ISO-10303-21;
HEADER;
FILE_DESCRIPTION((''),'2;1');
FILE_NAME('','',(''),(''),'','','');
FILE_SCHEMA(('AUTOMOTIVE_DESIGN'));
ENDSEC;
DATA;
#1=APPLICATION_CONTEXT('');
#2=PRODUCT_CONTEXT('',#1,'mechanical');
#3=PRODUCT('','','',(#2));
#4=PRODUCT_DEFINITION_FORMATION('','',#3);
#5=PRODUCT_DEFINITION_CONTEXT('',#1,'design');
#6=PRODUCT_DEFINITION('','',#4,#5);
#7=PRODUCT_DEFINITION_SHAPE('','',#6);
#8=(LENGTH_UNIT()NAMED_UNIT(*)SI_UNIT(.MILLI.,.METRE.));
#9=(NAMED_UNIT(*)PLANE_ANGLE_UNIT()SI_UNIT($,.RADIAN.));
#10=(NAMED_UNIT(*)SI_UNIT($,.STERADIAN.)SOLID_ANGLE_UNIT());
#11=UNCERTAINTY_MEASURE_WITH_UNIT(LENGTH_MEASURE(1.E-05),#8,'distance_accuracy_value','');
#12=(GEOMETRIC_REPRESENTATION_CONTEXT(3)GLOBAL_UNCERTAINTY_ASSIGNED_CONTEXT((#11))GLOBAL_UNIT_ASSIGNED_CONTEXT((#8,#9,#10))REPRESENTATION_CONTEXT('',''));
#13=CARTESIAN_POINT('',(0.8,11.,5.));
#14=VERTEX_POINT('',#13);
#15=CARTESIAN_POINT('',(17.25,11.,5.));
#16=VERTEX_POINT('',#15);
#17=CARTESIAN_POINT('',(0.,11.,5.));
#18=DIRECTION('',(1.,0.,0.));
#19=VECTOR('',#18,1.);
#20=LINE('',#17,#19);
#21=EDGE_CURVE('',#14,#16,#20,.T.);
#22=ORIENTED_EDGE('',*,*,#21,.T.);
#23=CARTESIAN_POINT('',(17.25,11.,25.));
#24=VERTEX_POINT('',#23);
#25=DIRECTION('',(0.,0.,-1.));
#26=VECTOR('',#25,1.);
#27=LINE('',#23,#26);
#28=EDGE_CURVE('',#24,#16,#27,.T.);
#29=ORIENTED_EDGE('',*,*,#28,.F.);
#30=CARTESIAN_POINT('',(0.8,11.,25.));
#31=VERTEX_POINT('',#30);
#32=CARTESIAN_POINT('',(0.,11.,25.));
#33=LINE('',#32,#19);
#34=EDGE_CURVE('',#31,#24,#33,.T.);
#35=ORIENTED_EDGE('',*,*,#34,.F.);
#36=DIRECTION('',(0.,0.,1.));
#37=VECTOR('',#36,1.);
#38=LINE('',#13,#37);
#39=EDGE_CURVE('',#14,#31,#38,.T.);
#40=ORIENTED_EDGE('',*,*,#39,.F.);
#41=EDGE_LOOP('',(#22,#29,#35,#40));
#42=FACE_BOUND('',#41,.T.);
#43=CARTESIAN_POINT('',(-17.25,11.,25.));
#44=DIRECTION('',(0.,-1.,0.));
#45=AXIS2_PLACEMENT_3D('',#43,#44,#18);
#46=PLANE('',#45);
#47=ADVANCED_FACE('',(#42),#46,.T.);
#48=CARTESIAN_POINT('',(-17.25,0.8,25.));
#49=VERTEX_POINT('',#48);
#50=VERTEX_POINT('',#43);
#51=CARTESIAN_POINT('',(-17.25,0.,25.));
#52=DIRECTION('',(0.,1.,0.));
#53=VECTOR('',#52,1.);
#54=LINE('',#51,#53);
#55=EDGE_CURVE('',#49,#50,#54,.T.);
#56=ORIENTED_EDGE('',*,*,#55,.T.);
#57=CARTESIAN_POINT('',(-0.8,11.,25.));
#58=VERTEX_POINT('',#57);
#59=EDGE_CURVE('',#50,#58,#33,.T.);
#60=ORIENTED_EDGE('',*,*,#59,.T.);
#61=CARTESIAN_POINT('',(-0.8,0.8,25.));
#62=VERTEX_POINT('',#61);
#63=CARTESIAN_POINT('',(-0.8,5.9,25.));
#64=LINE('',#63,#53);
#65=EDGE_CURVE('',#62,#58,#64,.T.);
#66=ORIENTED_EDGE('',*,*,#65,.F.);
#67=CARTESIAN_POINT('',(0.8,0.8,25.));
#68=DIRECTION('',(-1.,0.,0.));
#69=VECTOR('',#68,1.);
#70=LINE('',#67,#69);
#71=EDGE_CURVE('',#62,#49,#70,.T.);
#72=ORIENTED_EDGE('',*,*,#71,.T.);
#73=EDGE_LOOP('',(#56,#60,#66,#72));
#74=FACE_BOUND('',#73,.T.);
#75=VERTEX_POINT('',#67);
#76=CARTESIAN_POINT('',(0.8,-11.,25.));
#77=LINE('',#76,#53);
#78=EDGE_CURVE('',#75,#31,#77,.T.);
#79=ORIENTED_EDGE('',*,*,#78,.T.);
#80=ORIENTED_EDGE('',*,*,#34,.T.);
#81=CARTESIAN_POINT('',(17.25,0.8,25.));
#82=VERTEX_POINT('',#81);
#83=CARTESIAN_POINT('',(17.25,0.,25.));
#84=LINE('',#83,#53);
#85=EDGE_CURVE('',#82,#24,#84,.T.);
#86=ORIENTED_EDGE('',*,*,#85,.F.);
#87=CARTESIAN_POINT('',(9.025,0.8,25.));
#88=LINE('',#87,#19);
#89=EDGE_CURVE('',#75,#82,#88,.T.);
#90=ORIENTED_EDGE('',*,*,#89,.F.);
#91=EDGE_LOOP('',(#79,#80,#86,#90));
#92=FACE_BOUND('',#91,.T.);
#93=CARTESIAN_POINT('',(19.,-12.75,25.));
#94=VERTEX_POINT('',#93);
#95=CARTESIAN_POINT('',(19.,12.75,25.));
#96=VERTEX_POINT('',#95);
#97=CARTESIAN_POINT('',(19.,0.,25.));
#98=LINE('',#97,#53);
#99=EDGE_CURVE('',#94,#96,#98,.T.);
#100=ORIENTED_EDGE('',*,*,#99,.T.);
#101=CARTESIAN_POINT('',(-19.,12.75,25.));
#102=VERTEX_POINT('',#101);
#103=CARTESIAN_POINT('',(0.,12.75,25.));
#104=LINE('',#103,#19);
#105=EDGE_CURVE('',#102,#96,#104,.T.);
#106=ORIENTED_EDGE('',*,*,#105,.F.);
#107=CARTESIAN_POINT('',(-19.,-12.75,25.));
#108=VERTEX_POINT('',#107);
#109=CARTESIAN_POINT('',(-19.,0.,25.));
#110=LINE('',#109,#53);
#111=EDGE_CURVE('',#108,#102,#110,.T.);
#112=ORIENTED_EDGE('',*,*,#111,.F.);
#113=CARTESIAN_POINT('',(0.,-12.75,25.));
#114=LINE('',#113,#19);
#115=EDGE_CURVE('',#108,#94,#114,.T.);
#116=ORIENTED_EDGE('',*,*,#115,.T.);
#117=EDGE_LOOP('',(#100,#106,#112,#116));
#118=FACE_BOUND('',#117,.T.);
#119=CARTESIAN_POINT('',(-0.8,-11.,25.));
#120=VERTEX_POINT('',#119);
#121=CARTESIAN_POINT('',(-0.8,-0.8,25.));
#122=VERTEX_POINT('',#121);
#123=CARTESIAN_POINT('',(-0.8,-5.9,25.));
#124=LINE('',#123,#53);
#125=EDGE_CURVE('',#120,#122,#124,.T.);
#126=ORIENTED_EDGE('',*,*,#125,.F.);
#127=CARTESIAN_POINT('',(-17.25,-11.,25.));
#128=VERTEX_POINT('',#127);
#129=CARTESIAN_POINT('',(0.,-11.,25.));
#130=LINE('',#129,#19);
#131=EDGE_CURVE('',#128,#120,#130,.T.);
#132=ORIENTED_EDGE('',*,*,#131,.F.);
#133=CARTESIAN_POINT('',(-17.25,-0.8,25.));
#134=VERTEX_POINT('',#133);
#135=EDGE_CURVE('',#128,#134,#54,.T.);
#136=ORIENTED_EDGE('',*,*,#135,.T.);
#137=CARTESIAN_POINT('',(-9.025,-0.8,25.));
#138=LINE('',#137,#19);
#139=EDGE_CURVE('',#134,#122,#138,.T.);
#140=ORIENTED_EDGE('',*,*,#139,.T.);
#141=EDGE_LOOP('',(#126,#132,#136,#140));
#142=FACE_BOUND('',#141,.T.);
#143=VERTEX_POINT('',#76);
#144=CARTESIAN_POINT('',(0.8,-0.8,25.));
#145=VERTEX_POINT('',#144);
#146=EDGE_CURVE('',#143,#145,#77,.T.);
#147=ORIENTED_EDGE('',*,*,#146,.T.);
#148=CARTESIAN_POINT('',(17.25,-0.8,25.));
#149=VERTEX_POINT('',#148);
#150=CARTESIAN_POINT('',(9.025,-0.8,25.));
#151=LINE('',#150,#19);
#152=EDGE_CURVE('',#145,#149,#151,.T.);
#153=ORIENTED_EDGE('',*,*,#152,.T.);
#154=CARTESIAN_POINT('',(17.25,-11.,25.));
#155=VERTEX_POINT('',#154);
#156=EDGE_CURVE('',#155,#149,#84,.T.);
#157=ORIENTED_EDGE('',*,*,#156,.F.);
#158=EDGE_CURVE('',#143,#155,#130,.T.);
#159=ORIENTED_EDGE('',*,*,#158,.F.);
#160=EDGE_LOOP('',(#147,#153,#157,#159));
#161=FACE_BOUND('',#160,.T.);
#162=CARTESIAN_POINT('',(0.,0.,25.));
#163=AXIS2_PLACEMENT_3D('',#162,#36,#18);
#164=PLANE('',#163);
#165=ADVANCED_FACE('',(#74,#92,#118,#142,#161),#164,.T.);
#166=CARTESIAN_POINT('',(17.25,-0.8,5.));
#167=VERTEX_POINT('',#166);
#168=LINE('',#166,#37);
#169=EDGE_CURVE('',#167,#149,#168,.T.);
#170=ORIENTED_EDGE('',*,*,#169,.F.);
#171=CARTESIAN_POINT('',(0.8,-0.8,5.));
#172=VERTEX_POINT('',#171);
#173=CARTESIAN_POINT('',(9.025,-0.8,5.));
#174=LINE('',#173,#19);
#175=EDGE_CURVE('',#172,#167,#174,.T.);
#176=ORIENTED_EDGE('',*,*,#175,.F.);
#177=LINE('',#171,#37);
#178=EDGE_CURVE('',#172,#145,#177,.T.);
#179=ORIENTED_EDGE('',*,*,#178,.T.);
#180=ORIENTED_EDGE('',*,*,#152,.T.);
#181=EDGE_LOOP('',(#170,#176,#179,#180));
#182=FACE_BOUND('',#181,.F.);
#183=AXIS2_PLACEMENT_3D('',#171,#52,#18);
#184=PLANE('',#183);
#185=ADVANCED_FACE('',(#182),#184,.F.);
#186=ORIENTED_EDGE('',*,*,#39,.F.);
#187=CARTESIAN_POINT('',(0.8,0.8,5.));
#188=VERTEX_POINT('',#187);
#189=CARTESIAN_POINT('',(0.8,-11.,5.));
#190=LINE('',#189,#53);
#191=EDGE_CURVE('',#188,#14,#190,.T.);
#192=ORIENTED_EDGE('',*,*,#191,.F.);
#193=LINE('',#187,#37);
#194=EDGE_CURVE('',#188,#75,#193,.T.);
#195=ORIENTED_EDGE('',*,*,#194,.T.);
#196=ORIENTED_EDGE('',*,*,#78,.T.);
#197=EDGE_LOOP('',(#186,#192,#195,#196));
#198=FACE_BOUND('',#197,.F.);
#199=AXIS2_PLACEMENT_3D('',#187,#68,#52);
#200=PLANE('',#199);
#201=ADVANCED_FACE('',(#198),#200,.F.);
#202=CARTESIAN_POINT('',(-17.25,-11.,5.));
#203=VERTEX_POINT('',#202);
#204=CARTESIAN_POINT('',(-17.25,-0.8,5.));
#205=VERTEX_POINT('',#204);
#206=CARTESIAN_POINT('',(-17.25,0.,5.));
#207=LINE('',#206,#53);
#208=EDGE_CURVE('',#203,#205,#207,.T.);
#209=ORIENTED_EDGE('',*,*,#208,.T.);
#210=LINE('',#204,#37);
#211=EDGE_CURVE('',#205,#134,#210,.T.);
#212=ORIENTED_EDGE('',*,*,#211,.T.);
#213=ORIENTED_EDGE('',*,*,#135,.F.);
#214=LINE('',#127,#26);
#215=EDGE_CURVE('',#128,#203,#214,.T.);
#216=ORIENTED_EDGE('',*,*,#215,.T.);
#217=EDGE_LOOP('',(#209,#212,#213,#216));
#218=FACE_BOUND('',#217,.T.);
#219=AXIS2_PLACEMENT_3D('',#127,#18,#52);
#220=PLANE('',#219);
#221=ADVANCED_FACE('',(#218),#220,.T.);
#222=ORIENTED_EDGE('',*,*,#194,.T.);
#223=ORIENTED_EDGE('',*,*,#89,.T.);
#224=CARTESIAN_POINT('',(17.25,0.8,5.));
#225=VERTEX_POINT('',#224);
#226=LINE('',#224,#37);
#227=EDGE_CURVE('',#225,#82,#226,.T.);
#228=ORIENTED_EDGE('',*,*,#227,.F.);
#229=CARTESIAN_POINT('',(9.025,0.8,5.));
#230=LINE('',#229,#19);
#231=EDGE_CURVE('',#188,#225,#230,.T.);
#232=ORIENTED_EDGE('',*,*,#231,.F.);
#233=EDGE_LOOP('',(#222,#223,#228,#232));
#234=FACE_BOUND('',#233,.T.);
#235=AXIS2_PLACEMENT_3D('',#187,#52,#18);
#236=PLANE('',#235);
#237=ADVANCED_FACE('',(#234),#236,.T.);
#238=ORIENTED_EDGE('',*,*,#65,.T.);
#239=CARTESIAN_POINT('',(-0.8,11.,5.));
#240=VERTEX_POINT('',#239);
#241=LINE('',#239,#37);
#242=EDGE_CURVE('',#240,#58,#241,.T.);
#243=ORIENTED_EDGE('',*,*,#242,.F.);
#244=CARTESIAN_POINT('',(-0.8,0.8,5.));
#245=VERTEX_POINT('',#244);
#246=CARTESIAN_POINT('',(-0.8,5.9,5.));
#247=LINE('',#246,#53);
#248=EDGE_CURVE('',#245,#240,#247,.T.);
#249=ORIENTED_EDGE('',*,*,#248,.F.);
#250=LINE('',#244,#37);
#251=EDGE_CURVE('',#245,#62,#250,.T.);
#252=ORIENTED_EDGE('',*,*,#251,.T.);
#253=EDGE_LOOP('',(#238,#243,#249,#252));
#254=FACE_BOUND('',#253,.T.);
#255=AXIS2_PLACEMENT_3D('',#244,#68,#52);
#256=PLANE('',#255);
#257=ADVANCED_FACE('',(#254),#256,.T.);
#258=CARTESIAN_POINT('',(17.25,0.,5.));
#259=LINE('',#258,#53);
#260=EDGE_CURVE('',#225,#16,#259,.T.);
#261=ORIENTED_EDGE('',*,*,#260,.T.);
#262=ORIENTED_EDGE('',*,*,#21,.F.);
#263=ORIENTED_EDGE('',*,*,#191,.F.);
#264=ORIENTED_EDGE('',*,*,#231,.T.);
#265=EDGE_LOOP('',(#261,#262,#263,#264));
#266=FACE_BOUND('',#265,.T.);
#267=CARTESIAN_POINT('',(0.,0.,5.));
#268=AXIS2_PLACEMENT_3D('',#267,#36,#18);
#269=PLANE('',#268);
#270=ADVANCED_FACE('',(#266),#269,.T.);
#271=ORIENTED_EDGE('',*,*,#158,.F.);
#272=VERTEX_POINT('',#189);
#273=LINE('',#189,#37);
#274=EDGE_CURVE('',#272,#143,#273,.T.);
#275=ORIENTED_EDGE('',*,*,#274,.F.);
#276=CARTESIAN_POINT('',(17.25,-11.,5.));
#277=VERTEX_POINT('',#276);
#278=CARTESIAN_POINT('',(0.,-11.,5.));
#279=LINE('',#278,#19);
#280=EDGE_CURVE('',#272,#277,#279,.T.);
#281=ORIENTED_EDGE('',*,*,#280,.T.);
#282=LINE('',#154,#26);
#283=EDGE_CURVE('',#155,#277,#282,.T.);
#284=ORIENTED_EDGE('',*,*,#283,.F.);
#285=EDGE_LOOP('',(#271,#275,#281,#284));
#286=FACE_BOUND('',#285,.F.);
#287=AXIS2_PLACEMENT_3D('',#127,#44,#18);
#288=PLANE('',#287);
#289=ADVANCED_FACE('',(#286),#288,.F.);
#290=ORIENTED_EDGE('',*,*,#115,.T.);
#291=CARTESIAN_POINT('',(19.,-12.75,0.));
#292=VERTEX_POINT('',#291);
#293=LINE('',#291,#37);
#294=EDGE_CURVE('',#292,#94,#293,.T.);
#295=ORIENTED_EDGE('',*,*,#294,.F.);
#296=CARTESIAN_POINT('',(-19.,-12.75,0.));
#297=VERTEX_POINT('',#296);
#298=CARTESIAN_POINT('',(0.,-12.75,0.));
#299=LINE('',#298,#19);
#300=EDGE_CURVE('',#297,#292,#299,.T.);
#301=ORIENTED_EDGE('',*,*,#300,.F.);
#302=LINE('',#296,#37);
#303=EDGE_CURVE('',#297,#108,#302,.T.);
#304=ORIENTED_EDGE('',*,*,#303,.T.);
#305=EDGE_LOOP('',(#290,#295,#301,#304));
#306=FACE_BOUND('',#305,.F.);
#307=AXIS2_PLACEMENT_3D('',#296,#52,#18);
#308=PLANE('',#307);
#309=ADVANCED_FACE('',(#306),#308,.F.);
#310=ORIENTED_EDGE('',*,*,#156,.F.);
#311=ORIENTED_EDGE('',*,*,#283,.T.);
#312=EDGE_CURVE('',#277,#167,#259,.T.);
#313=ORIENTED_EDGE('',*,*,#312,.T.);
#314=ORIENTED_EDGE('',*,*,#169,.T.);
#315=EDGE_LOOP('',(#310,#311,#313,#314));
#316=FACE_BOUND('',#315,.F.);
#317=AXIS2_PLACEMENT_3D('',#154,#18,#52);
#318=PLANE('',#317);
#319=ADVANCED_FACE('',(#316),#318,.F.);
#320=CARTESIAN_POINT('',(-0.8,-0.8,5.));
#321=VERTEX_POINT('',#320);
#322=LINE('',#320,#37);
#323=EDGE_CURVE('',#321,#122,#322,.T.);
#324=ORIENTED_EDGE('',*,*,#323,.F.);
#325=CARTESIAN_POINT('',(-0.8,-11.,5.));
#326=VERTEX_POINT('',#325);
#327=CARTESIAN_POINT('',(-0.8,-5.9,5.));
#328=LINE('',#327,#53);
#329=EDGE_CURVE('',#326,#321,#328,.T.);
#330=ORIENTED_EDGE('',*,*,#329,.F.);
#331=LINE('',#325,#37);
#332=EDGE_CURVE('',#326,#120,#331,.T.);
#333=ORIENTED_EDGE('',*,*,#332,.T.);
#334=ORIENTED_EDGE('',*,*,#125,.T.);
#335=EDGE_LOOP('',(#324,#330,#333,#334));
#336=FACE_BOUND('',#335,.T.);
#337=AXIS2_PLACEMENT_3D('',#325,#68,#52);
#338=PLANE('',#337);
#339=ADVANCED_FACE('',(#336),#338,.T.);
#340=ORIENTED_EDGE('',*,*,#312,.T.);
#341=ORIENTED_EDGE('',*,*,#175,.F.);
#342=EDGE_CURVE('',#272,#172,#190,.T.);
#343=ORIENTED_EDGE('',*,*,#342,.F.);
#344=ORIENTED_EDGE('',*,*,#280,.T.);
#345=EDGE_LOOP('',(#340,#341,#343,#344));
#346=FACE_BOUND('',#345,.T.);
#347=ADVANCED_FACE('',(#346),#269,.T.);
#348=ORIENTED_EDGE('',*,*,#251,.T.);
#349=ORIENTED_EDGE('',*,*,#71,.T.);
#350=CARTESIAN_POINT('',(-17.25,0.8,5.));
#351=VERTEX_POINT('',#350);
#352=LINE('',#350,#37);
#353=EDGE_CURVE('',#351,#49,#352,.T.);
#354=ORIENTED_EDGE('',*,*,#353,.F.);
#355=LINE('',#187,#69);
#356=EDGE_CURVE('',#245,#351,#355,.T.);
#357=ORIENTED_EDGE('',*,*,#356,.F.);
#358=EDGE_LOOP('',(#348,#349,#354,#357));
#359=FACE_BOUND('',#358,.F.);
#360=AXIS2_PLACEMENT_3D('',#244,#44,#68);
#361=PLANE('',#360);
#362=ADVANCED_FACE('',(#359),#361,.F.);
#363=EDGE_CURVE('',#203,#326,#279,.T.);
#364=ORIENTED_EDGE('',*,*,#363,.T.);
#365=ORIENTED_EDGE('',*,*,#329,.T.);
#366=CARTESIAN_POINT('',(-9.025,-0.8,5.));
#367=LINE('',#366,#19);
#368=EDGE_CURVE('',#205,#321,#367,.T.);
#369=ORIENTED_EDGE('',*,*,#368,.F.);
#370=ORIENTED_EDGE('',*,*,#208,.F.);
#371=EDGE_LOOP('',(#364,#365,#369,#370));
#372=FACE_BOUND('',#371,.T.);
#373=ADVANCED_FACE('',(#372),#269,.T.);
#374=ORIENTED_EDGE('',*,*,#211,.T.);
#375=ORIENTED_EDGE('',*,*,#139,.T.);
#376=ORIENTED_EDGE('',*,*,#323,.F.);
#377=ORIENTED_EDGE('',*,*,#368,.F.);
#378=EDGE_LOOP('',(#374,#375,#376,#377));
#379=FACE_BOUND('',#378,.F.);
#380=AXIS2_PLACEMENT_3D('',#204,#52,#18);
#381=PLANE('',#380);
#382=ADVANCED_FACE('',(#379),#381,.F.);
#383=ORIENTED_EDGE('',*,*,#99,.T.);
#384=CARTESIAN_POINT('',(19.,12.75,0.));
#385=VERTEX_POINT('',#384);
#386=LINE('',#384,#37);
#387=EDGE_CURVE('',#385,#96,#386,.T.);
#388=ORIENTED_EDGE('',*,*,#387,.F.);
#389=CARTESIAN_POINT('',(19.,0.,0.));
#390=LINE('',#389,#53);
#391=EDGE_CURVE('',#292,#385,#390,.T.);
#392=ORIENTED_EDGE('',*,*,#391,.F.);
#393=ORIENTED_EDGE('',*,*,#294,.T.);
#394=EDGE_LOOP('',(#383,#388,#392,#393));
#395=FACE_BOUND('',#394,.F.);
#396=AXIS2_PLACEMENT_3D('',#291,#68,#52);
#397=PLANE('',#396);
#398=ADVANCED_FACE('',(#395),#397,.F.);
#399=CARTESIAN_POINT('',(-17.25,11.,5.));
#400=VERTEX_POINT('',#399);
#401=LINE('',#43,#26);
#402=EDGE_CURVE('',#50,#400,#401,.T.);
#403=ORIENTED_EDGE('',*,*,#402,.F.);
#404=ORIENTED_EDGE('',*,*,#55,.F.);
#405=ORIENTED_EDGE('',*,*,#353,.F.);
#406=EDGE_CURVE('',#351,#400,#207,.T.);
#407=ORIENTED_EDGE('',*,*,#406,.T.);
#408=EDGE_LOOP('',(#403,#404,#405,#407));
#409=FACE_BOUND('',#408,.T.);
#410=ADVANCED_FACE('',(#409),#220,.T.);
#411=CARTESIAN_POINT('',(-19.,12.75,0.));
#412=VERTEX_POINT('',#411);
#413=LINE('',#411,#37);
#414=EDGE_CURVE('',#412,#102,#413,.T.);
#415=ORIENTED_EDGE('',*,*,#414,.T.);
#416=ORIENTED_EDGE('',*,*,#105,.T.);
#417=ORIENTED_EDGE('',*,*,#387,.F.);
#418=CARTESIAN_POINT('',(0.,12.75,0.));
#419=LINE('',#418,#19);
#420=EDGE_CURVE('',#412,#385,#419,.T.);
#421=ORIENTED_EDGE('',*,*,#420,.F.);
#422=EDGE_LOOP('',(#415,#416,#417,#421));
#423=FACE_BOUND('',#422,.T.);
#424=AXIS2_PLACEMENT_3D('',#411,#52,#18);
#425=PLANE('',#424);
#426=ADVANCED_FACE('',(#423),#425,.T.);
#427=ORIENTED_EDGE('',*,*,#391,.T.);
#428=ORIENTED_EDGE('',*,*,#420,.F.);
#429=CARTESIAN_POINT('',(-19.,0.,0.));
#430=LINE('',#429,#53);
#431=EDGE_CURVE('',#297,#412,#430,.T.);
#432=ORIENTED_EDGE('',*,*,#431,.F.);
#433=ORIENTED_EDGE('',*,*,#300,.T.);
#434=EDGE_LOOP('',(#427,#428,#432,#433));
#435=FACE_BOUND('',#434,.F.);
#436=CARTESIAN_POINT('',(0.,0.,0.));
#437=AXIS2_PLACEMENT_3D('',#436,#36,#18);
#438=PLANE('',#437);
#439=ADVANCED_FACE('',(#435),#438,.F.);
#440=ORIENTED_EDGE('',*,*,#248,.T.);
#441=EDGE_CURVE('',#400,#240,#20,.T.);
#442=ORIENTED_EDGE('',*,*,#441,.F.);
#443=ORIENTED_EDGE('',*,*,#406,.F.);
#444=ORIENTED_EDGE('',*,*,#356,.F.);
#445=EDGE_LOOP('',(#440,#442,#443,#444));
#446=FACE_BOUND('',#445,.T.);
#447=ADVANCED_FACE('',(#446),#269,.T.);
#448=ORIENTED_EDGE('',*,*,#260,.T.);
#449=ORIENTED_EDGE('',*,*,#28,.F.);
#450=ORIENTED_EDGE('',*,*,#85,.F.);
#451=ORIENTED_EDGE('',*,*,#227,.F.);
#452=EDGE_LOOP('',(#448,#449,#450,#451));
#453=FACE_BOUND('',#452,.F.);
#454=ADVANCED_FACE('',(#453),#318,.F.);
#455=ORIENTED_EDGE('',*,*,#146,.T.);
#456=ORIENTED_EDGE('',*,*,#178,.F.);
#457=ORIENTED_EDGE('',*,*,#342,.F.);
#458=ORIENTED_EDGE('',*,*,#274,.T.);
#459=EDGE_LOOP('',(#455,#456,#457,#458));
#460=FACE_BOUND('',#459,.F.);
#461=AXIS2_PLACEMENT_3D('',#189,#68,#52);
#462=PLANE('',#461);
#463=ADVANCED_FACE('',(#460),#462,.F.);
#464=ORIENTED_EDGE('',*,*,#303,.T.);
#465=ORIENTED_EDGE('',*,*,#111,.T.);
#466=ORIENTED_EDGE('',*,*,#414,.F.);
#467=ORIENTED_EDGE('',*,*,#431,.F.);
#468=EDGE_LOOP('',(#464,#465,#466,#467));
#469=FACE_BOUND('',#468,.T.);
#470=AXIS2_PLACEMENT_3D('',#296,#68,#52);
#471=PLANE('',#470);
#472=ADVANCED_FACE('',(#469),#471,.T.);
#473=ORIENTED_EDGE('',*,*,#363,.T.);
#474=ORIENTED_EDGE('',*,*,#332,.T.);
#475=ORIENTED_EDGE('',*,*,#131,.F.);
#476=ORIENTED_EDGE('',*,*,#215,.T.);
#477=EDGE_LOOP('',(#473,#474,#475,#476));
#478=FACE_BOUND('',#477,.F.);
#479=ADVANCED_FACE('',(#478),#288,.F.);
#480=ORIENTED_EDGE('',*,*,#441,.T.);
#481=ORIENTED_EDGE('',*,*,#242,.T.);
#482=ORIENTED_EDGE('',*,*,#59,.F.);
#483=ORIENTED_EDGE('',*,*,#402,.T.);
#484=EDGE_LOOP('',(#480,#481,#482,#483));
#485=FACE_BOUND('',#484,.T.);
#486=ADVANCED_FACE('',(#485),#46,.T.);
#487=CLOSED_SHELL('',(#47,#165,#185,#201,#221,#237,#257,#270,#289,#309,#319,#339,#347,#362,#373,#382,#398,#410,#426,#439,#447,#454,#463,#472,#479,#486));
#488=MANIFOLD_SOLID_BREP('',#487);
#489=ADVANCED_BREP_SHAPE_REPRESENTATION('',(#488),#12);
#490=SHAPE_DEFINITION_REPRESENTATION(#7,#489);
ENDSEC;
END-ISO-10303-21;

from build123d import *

# Parameters (mm, degrees)
F0_W     = 38
F0_H     = 25.5
F1_DEPTH = 25
F2_W     = 34.5
F2_H     = 22
F3_DEPTH = 20
F4_W     = 16.45
F4_H     = 1.6
F4_W_2   = 1.6
F4_H_2   = 10.2
F5_DEPTH = 20


with BuildPart() as f1:
    # F0 (on Top) → F1 (new body)
    with BuildSketch(Plane.XY):
        Rectangle(F0_W, F0_H)
    extrude(amount=F1_DEPTH)

    # F2 (on face) → F3 (cut)
    with BuildSketch(Plane.XY.offset(25)):
        Rectangle(F2_W, F2_H)
    extrude(amount=-F3_DEPTH, mode=Mode.SUBTRACT)

    # F4 (on face) → F5 (join)
    with BuildSketch(Plane.XY.offset(5)):
        with Locations((-9.025, 0)):
            Rectangle(F4_W, F4_H)
        with Locations((0, -5.9)):
            Rectangle(F4_W_2, F4_H_2)
        Rectangle(F4_W_2, F4_H)
        with Locations((0, 5.9)):
            Rectangle(F4_W_2, F4_H_2)
        with Locations((9.025, 0)):
            Rectangle(F4_W, F4_H)
    extrude(amount=F5_DEPTH)


solid = f1.part
